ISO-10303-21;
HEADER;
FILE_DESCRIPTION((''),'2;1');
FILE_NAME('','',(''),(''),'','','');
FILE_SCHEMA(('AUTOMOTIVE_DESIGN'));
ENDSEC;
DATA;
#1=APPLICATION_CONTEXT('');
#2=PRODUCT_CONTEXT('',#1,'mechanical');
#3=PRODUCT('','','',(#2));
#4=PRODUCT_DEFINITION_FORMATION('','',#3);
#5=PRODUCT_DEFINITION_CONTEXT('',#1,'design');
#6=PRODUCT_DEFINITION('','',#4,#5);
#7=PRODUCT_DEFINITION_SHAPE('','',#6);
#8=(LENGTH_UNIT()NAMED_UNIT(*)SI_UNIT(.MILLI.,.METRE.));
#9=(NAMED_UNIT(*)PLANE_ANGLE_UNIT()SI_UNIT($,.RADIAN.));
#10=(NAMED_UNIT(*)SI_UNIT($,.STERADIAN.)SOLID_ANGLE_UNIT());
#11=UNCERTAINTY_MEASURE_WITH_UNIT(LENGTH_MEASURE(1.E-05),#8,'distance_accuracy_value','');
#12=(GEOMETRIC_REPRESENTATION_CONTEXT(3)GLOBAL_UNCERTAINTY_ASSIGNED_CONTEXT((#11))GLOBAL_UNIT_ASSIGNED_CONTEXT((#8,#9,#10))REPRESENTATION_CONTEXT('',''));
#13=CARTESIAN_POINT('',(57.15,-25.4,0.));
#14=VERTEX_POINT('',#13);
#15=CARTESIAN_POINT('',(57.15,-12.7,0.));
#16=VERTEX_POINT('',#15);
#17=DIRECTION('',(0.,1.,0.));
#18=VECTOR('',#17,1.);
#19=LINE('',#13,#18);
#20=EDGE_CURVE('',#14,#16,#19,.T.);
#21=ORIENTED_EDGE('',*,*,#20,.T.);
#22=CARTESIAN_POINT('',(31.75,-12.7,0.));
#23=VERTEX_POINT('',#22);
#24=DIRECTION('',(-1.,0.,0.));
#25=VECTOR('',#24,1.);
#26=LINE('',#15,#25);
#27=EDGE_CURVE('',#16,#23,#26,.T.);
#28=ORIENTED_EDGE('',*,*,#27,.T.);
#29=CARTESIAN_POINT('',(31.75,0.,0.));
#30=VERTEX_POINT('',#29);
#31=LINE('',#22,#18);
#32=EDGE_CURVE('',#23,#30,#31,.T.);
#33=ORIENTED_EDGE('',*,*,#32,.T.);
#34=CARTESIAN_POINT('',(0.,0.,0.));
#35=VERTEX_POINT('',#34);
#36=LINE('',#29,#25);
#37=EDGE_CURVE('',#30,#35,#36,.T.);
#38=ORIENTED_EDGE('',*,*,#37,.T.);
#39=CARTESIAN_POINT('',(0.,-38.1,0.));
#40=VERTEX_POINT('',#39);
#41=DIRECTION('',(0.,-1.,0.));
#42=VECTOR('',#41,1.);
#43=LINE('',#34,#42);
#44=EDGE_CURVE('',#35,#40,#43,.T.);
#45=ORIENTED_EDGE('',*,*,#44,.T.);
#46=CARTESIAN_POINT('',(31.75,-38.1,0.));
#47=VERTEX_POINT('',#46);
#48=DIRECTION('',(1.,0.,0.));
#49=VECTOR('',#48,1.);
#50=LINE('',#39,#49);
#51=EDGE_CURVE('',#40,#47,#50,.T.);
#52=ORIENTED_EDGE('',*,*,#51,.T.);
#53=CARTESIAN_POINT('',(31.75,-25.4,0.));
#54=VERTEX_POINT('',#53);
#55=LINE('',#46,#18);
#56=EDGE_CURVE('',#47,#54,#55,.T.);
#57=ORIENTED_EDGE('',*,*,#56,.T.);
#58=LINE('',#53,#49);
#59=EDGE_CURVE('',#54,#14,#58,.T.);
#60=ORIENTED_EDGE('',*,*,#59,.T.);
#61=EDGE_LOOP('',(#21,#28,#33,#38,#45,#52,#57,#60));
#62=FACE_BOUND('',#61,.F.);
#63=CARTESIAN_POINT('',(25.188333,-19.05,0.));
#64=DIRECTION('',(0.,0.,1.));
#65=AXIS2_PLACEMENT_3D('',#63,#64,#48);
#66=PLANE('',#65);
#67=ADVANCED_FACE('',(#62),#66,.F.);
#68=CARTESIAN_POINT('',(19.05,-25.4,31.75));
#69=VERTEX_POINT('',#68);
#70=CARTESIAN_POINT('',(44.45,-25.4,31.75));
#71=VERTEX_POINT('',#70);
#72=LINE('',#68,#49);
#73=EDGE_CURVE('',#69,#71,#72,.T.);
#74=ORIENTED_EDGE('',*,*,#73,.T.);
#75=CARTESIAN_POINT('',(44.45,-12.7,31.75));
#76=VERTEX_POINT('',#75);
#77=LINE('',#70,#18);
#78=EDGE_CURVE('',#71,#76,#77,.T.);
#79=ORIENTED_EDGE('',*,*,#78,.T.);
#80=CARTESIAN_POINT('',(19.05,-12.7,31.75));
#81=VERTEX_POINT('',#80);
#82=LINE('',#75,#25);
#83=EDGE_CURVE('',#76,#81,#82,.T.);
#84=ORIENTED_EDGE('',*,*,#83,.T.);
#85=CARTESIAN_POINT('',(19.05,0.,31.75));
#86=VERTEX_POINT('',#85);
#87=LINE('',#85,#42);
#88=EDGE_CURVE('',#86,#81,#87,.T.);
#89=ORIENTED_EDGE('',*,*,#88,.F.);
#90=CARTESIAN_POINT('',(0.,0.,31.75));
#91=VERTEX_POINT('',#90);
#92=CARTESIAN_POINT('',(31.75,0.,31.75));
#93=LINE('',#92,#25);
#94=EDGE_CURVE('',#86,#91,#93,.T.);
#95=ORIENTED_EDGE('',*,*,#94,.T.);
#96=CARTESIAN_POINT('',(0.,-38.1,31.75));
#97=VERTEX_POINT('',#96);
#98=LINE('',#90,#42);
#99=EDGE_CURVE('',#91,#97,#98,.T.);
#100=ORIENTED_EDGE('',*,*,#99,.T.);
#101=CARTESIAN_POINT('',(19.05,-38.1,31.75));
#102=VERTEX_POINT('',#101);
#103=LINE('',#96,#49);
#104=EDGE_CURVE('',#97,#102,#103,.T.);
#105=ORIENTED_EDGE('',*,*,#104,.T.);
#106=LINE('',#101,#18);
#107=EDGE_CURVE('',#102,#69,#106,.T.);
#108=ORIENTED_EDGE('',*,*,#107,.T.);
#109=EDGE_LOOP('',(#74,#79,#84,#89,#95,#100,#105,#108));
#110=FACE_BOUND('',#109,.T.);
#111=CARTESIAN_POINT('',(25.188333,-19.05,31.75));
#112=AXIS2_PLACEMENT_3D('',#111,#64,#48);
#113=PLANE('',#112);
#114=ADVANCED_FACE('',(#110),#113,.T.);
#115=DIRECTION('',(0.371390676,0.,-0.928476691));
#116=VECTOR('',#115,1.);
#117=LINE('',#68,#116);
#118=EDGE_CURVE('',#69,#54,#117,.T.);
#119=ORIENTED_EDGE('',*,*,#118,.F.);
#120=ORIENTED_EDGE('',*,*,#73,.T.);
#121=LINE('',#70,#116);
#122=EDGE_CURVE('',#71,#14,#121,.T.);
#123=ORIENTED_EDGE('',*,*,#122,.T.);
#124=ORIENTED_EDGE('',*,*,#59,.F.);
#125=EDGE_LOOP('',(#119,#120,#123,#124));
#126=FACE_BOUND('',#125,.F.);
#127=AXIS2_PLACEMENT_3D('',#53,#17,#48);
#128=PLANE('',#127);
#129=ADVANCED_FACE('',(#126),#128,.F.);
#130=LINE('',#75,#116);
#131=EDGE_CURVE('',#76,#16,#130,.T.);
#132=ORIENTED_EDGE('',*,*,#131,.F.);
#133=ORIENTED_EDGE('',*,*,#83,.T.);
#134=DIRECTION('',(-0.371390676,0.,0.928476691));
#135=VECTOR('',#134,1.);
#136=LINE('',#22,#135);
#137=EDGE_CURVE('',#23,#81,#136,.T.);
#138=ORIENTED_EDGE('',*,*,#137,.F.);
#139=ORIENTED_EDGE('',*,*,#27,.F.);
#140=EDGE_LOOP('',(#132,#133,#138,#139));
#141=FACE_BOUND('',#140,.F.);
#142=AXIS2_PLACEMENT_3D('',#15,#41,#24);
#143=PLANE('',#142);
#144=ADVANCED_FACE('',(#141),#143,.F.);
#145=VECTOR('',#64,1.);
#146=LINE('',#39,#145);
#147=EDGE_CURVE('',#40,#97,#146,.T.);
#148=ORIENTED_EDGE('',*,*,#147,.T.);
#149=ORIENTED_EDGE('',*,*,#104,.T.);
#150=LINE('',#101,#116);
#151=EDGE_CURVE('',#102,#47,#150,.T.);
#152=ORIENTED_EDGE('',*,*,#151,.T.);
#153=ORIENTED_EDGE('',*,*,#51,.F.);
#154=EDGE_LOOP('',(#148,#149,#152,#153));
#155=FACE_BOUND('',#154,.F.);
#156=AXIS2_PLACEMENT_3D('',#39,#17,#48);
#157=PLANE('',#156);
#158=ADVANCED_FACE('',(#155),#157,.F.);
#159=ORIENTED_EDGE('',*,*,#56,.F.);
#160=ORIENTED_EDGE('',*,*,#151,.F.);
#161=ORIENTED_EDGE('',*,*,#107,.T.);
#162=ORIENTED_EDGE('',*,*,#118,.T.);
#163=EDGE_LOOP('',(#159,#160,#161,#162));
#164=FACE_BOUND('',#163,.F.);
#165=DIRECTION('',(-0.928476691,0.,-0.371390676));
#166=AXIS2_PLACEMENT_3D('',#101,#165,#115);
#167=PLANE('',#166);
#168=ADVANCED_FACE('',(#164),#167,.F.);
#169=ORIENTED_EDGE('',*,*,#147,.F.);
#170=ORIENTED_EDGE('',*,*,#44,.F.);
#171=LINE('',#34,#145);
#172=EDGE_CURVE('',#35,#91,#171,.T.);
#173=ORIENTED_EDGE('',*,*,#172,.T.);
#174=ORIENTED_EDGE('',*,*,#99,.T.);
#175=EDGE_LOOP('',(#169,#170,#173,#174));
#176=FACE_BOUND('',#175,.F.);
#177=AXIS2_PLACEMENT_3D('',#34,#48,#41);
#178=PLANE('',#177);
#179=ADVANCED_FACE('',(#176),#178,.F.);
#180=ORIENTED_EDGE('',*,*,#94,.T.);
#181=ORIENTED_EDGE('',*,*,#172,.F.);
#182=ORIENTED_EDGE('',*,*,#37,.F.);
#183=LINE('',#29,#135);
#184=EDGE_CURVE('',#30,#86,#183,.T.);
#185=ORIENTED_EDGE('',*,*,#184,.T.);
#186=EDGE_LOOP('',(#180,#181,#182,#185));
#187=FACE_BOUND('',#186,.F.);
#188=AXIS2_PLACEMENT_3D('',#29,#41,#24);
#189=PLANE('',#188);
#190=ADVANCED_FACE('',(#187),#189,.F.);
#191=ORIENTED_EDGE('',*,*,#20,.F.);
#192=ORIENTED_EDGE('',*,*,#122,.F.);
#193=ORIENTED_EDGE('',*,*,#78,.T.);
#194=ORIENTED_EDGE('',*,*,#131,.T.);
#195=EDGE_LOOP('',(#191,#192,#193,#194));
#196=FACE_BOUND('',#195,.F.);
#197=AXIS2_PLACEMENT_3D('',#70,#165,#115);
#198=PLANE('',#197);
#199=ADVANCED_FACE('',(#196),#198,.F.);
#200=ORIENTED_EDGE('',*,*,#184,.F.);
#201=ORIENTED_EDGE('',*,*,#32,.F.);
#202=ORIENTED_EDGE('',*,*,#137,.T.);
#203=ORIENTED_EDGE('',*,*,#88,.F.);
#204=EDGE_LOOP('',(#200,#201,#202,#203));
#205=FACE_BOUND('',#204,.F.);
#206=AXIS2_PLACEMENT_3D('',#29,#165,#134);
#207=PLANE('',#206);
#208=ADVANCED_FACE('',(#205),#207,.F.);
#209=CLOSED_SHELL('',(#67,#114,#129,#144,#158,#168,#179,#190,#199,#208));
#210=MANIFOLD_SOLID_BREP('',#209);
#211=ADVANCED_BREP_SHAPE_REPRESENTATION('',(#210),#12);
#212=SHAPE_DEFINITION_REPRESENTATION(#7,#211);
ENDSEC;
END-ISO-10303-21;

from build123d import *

# Parameters (mm, degrees)
F1_DEPTH = 31.75
F3_DEPTH = 12.7
F5_DEPTH = 12.7
F7_DEPTH = 12.7


# Not quite as in the source:
# - a length typed as a fraction of an inch, garbled in the dataset ("3 / 203.2 mm" for 3/8 in), is restored


with BuildPart() as f1:
    # F0 (on Top) → F1 (new body)
    with BuildSketch(Plane.XY):
        Polygon((31.75, 0), (0, 0), (0, -38.1), (31.75, -38.1), (31.75, -25.4), (57.15, -25.4), (57.15, -12.7), (31.75, -12.7), align=None)
    extrude(amount=F1_DEPTH)

    # F2 (on face) → F3 (cut)
    with BuildSketch(Plane.XZ.offset(38.1)):
        Polygon((19.05, 31.75), (31.75, 0), (31.75, 31.75), align=None)
    extrude(amount=-F3_DEPTH, mode=Mode.SUBTRACT)

    # F4 (on face) → F5 (cut)
    with BuildSketch(Plane.XZ.offset(25.4)):
        Polygon((44.45, 31.75), (57.15, 0), (57.15, 31.75), align=None)
    extrude(amount=-F5_DEPTH, mode=Mode.SUBTRACT)

    # F6 (on face) → F7 (cut)
    with BuildSketch(Plane(origin=(0, 0, 0), x_dir=(-1, 0, 0), z_dir=(0, 1, 0))):
        Polygon((-31.75, 31.75), (-31.75, 0), (-19.05, 31.75), align=None)
    extrude(amount=-F7_DEPTH, mode=Mode.SUBTRACT)


solid = f1.part
